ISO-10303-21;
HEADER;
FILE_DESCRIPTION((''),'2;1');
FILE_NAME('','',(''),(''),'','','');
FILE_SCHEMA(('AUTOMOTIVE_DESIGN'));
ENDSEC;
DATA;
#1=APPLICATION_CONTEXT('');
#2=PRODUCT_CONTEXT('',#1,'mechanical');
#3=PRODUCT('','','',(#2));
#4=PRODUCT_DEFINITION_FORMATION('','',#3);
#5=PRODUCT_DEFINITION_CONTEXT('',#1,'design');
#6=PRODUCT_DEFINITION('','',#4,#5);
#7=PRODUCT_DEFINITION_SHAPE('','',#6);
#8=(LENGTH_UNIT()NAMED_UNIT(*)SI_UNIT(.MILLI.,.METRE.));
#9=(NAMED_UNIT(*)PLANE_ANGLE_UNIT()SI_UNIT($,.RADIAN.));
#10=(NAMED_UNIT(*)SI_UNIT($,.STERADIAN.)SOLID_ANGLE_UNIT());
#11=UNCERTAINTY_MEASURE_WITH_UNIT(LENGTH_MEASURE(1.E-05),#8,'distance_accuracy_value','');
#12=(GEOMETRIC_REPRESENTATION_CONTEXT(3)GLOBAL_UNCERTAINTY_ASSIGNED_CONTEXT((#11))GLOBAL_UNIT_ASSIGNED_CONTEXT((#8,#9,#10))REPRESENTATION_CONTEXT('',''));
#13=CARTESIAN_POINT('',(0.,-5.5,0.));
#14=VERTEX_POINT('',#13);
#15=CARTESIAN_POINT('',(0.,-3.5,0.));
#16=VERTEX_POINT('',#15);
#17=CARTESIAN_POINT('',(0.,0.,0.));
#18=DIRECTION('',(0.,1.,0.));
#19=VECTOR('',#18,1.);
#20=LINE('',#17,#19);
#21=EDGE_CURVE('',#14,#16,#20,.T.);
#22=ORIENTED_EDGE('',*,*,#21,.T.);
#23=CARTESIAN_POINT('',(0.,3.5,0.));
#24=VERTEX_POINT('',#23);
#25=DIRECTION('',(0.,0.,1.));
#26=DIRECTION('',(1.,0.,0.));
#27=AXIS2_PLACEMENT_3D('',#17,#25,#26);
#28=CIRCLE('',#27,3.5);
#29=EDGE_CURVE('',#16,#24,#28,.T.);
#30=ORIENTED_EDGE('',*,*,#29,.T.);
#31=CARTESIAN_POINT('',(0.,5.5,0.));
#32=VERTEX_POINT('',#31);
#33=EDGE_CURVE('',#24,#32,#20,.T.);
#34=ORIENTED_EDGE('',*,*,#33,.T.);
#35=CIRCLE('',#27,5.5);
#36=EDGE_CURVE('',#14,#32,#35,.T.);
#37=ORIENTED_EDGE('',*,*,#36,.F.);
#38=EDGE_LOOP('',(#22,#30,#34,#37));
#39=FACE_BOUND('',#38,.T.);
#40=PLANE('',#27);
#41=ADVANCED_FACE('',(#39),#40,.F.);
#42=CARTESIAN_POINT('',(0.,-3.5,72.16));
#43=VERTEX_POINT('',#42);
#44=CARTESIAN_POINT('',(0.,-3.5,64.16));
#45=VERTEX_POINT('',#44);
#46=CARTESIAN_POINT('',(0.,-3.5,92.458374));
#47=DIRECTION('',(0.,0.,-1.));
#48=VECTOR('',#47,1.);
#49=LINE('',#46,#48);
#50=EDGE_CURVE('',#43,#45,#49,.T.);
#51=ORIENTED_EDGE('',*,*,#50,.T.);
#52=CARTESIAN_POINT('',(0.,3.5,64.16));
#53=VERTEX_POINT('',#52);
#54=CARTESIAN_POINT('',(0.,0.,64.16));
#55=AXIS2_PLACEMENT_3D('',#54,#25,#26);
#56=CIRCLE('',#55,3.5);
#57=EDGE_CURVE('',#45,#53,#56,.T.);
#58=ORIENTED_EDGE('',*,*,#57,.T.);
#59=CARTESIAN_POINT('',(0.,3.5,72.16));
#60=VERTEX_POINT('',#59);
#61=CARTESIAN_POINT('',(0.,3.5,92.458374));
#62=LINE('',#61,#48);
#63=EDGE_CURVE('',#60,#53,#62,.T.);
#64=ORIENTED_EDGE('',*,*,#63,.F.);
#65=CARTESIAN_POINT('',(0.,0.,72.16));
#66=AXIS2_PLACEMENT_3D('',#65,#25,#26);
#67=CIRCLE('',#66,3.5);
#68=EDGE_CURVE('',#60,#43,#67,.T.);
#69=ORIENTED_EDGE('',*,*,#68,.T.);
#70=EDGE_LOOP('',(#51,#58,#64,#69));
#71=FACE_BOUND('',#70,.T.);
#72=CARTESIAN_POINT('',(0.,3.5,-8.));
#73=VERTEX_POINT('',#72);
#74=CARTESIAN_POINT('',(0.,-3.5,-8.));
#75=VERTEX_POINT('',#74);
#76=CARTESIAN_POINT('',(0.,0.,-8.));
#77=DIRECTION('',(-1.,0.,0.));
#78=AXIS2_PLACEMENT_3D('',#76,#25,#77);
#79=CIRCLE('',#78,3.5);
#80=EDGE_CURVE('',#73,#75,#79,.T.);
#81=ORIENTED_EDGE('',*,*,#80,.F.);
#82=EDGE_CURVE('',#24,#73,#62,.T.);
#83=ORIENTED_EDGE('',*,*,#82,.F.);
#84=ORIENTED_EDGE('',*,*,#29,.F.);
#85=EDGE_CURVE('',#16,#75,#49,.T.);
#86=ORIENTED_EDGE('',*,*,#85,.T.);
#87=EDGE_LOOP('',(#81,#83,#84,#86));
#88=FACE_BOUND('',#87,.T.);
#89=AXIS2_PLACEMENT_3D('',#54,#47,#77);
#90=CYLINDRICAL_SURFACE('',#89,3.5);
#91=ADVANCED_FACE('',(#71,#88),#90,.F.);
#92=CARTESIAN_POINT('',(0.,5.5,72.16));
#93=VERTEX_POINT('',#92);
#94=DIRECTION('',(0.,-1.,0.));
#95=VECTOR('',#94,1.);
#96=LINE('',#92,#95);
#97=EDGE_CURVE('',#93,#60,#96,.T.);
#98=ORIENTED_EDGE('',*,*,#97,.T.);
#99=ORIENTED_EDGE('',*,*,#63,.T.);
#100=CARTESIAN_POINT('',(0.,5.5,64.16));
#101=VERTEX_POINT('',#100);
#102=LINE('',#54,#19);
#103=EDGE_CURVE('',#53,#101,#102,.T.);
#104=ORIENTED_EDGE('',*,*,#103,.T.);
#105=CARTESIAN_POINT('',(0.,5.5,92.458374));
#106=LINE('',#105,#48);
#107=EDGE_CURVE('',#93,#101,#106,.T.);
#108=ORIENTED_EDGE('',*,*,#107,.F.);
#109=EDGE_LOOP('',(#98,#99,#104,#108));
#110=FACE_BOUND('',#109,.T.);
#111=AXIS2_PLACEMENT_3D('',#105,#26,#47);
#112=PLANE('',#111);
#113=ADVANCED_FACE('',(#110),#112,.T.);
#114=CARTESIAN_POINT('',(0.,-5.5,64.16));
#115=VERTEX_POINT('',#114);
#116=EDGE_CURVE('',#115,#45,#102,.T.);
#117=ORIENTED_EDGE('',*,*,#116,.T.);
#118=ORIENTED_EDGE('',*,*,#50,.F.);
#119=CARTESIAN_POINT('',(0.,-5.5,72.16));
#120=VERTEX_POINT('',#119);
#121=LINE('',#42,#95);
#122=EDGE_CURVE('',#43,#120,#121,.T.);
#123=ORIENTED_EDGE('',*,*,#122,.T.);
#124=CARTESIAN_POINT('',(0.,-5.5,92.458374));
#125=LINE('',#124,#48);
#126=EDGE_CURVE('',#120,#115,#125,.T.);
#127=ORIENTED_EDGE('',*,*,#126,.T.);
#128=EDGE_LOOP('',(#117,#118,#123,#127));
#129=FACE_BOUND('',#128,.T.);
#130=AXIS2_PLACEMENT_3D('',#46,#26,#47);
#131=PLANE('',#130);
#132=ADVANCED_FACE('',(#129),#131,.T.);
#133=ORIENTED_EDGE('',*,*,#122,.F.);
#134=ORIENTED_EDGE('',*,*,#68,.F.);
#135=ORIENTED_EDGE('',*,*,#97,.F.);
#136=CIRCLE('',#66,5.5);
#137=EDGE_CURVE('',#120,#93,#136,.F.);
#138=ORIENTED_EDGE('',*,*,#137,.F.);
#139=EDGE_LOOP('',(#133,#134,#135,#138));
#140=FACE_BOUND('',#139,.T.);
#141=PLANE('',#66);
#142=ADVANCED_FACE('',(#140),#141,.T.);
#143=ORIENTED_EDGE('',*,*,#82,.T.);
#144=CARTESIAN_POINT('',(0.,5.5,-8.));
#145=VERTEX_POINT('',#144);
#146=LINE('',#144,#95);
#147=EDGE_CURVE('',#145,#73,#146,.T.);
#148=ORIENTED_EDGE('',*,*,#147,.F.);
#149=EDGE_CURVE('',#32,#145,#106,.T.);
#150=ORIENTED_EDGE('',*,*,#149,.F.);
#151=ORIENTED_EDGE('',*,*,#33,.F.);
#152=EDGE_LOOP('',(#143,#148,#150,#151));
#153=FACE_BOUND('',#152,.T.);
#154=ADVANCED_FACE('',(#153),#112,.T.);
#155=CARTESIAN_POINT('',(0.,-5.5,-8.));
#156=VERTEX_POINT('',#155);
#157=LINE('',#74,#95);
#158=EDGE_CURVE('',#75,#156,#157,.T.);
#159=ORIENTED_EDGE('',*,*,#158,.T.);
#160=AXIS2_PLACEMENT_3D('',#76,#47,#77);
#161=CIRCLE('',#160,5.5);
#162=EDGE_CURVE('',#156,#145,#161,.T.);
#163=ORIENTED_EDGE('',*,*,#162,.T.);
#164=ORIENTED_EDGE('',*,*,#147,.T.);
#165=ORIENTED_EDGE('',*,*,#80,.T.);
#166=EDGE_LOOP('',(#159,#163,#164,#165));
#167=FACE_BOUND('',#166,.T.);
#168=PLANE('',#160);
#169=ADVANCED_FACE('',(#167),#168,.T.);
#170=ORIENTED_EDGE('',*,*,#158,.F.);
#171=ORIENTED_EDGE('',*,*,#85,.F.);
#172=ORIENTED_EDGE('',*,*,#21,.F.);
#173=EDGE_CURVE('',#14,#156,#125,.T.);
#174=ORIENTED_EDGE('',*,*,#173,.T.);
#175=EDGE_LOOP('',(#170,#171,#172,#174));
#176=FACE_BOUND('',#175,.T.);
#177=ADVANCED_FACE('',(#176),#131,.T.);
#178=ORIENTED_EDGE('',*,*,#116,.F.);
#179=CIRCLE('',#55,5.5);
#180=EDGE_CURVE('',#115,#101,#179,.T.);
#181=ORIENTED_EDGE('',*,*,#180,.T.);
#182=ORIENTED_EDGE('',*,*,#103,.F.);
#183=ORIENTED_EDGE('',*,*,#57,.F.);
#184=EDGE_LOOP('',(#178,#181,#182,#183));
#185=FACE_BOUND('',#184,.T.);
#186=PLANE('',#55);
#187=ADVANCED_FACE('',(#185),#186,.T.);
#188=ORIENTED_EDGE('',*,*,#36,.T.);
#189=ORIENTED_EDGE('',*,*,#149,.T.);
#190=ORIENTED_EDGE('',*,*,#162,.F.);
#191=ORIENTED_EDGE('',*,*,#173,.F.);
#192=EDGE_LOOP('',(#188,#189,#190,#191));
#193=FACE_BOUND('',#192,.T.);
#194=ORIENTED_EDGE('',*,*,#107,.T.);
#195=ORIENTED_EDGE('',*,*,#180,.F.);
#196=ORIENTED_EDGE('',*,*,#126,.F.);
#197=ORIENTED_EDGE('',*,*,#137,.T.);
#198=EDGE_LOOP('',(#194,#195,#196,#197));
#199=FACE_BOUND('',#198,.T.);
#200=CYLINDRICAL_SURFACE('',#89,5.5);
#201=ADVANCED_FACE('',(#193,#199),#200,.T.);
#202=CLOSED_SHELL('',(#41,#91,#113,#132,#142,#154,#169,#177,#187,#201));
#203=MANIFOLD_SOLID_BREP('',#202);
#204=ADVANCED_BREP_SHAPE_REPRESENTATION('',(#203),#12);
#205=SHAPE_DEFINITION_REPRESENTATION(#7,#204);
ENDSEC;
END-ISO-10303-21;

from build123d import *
from build123d.topology import SkipClean

# Parameters (mm, degrees)
SKETCH1_R                                        = 5.5
SKETCH1_R_2                                      = 3.5
BOSS_EXTRUDE1_DLUGOSC_CALKOWITA_DEPTH            = 64.16
BOSS_EXTRUDE2_PRZEDLUZENIE_DO_MONTAZU_DEPTH      = 8
BOSS_EXTRUDE2_PRZEDLUZENIE_DO_MONTAZU_DEPTH_BACK = 72.16


with BuildPart() as part:
    # Sketch1 → Boss-Extrude1 dlugosc calkowita (new body)
    with BuildSketch(Plane.XY):
        Circle(SKETCH1_R)
        Circle(SKETCH1_R_2, mode=Mode.SUBTRACT)
    extrude(amount=BOSS_EXTRUDE1_DLUGOSC_CALKOWITA_DEPTH)

    # Sketch2 → Boss-Extrude2 przedluzenie do montazu (add, two sides: drawn at the far end of the back side and taken through both)
    with SkipClean():  # the faces are left unmerged after this step: merging them gives an invalid solid
        with BuildSketch(Plane(origin=(0, 0, 0), x_dir=(-1, 0, 0), z_dir=(0, 0, -1)).offset(-BOSS_EXTRUDE2_PRZEDLUZENIE_DO_MONTAZU_DEPTH_BACK)):
            with BuildLine():
                Line((0, 5.5), (0, 3.5))
                ThreePointArc((0, 3.5), (3.5, 0), (0, -3.5))
                Line((0, -3.5), (0, -5.5))
                ThreePointArc((0, -5.5), (5.5, 0), (0, 5.5))
            make_face()
        extrude(amount=BOSS_EXTRUDE2_PRZEDLUZENIE_DO_MONTAZU_DEPTH + BOSS_EXTRUDE2_PRZEDLUZENIE_DO_MONTAZU_DEPTH_BACK)
    add(part.part.scale(1), mode=Mode.REPLACE)  # the faces are merged on a copy


solid = part.part
